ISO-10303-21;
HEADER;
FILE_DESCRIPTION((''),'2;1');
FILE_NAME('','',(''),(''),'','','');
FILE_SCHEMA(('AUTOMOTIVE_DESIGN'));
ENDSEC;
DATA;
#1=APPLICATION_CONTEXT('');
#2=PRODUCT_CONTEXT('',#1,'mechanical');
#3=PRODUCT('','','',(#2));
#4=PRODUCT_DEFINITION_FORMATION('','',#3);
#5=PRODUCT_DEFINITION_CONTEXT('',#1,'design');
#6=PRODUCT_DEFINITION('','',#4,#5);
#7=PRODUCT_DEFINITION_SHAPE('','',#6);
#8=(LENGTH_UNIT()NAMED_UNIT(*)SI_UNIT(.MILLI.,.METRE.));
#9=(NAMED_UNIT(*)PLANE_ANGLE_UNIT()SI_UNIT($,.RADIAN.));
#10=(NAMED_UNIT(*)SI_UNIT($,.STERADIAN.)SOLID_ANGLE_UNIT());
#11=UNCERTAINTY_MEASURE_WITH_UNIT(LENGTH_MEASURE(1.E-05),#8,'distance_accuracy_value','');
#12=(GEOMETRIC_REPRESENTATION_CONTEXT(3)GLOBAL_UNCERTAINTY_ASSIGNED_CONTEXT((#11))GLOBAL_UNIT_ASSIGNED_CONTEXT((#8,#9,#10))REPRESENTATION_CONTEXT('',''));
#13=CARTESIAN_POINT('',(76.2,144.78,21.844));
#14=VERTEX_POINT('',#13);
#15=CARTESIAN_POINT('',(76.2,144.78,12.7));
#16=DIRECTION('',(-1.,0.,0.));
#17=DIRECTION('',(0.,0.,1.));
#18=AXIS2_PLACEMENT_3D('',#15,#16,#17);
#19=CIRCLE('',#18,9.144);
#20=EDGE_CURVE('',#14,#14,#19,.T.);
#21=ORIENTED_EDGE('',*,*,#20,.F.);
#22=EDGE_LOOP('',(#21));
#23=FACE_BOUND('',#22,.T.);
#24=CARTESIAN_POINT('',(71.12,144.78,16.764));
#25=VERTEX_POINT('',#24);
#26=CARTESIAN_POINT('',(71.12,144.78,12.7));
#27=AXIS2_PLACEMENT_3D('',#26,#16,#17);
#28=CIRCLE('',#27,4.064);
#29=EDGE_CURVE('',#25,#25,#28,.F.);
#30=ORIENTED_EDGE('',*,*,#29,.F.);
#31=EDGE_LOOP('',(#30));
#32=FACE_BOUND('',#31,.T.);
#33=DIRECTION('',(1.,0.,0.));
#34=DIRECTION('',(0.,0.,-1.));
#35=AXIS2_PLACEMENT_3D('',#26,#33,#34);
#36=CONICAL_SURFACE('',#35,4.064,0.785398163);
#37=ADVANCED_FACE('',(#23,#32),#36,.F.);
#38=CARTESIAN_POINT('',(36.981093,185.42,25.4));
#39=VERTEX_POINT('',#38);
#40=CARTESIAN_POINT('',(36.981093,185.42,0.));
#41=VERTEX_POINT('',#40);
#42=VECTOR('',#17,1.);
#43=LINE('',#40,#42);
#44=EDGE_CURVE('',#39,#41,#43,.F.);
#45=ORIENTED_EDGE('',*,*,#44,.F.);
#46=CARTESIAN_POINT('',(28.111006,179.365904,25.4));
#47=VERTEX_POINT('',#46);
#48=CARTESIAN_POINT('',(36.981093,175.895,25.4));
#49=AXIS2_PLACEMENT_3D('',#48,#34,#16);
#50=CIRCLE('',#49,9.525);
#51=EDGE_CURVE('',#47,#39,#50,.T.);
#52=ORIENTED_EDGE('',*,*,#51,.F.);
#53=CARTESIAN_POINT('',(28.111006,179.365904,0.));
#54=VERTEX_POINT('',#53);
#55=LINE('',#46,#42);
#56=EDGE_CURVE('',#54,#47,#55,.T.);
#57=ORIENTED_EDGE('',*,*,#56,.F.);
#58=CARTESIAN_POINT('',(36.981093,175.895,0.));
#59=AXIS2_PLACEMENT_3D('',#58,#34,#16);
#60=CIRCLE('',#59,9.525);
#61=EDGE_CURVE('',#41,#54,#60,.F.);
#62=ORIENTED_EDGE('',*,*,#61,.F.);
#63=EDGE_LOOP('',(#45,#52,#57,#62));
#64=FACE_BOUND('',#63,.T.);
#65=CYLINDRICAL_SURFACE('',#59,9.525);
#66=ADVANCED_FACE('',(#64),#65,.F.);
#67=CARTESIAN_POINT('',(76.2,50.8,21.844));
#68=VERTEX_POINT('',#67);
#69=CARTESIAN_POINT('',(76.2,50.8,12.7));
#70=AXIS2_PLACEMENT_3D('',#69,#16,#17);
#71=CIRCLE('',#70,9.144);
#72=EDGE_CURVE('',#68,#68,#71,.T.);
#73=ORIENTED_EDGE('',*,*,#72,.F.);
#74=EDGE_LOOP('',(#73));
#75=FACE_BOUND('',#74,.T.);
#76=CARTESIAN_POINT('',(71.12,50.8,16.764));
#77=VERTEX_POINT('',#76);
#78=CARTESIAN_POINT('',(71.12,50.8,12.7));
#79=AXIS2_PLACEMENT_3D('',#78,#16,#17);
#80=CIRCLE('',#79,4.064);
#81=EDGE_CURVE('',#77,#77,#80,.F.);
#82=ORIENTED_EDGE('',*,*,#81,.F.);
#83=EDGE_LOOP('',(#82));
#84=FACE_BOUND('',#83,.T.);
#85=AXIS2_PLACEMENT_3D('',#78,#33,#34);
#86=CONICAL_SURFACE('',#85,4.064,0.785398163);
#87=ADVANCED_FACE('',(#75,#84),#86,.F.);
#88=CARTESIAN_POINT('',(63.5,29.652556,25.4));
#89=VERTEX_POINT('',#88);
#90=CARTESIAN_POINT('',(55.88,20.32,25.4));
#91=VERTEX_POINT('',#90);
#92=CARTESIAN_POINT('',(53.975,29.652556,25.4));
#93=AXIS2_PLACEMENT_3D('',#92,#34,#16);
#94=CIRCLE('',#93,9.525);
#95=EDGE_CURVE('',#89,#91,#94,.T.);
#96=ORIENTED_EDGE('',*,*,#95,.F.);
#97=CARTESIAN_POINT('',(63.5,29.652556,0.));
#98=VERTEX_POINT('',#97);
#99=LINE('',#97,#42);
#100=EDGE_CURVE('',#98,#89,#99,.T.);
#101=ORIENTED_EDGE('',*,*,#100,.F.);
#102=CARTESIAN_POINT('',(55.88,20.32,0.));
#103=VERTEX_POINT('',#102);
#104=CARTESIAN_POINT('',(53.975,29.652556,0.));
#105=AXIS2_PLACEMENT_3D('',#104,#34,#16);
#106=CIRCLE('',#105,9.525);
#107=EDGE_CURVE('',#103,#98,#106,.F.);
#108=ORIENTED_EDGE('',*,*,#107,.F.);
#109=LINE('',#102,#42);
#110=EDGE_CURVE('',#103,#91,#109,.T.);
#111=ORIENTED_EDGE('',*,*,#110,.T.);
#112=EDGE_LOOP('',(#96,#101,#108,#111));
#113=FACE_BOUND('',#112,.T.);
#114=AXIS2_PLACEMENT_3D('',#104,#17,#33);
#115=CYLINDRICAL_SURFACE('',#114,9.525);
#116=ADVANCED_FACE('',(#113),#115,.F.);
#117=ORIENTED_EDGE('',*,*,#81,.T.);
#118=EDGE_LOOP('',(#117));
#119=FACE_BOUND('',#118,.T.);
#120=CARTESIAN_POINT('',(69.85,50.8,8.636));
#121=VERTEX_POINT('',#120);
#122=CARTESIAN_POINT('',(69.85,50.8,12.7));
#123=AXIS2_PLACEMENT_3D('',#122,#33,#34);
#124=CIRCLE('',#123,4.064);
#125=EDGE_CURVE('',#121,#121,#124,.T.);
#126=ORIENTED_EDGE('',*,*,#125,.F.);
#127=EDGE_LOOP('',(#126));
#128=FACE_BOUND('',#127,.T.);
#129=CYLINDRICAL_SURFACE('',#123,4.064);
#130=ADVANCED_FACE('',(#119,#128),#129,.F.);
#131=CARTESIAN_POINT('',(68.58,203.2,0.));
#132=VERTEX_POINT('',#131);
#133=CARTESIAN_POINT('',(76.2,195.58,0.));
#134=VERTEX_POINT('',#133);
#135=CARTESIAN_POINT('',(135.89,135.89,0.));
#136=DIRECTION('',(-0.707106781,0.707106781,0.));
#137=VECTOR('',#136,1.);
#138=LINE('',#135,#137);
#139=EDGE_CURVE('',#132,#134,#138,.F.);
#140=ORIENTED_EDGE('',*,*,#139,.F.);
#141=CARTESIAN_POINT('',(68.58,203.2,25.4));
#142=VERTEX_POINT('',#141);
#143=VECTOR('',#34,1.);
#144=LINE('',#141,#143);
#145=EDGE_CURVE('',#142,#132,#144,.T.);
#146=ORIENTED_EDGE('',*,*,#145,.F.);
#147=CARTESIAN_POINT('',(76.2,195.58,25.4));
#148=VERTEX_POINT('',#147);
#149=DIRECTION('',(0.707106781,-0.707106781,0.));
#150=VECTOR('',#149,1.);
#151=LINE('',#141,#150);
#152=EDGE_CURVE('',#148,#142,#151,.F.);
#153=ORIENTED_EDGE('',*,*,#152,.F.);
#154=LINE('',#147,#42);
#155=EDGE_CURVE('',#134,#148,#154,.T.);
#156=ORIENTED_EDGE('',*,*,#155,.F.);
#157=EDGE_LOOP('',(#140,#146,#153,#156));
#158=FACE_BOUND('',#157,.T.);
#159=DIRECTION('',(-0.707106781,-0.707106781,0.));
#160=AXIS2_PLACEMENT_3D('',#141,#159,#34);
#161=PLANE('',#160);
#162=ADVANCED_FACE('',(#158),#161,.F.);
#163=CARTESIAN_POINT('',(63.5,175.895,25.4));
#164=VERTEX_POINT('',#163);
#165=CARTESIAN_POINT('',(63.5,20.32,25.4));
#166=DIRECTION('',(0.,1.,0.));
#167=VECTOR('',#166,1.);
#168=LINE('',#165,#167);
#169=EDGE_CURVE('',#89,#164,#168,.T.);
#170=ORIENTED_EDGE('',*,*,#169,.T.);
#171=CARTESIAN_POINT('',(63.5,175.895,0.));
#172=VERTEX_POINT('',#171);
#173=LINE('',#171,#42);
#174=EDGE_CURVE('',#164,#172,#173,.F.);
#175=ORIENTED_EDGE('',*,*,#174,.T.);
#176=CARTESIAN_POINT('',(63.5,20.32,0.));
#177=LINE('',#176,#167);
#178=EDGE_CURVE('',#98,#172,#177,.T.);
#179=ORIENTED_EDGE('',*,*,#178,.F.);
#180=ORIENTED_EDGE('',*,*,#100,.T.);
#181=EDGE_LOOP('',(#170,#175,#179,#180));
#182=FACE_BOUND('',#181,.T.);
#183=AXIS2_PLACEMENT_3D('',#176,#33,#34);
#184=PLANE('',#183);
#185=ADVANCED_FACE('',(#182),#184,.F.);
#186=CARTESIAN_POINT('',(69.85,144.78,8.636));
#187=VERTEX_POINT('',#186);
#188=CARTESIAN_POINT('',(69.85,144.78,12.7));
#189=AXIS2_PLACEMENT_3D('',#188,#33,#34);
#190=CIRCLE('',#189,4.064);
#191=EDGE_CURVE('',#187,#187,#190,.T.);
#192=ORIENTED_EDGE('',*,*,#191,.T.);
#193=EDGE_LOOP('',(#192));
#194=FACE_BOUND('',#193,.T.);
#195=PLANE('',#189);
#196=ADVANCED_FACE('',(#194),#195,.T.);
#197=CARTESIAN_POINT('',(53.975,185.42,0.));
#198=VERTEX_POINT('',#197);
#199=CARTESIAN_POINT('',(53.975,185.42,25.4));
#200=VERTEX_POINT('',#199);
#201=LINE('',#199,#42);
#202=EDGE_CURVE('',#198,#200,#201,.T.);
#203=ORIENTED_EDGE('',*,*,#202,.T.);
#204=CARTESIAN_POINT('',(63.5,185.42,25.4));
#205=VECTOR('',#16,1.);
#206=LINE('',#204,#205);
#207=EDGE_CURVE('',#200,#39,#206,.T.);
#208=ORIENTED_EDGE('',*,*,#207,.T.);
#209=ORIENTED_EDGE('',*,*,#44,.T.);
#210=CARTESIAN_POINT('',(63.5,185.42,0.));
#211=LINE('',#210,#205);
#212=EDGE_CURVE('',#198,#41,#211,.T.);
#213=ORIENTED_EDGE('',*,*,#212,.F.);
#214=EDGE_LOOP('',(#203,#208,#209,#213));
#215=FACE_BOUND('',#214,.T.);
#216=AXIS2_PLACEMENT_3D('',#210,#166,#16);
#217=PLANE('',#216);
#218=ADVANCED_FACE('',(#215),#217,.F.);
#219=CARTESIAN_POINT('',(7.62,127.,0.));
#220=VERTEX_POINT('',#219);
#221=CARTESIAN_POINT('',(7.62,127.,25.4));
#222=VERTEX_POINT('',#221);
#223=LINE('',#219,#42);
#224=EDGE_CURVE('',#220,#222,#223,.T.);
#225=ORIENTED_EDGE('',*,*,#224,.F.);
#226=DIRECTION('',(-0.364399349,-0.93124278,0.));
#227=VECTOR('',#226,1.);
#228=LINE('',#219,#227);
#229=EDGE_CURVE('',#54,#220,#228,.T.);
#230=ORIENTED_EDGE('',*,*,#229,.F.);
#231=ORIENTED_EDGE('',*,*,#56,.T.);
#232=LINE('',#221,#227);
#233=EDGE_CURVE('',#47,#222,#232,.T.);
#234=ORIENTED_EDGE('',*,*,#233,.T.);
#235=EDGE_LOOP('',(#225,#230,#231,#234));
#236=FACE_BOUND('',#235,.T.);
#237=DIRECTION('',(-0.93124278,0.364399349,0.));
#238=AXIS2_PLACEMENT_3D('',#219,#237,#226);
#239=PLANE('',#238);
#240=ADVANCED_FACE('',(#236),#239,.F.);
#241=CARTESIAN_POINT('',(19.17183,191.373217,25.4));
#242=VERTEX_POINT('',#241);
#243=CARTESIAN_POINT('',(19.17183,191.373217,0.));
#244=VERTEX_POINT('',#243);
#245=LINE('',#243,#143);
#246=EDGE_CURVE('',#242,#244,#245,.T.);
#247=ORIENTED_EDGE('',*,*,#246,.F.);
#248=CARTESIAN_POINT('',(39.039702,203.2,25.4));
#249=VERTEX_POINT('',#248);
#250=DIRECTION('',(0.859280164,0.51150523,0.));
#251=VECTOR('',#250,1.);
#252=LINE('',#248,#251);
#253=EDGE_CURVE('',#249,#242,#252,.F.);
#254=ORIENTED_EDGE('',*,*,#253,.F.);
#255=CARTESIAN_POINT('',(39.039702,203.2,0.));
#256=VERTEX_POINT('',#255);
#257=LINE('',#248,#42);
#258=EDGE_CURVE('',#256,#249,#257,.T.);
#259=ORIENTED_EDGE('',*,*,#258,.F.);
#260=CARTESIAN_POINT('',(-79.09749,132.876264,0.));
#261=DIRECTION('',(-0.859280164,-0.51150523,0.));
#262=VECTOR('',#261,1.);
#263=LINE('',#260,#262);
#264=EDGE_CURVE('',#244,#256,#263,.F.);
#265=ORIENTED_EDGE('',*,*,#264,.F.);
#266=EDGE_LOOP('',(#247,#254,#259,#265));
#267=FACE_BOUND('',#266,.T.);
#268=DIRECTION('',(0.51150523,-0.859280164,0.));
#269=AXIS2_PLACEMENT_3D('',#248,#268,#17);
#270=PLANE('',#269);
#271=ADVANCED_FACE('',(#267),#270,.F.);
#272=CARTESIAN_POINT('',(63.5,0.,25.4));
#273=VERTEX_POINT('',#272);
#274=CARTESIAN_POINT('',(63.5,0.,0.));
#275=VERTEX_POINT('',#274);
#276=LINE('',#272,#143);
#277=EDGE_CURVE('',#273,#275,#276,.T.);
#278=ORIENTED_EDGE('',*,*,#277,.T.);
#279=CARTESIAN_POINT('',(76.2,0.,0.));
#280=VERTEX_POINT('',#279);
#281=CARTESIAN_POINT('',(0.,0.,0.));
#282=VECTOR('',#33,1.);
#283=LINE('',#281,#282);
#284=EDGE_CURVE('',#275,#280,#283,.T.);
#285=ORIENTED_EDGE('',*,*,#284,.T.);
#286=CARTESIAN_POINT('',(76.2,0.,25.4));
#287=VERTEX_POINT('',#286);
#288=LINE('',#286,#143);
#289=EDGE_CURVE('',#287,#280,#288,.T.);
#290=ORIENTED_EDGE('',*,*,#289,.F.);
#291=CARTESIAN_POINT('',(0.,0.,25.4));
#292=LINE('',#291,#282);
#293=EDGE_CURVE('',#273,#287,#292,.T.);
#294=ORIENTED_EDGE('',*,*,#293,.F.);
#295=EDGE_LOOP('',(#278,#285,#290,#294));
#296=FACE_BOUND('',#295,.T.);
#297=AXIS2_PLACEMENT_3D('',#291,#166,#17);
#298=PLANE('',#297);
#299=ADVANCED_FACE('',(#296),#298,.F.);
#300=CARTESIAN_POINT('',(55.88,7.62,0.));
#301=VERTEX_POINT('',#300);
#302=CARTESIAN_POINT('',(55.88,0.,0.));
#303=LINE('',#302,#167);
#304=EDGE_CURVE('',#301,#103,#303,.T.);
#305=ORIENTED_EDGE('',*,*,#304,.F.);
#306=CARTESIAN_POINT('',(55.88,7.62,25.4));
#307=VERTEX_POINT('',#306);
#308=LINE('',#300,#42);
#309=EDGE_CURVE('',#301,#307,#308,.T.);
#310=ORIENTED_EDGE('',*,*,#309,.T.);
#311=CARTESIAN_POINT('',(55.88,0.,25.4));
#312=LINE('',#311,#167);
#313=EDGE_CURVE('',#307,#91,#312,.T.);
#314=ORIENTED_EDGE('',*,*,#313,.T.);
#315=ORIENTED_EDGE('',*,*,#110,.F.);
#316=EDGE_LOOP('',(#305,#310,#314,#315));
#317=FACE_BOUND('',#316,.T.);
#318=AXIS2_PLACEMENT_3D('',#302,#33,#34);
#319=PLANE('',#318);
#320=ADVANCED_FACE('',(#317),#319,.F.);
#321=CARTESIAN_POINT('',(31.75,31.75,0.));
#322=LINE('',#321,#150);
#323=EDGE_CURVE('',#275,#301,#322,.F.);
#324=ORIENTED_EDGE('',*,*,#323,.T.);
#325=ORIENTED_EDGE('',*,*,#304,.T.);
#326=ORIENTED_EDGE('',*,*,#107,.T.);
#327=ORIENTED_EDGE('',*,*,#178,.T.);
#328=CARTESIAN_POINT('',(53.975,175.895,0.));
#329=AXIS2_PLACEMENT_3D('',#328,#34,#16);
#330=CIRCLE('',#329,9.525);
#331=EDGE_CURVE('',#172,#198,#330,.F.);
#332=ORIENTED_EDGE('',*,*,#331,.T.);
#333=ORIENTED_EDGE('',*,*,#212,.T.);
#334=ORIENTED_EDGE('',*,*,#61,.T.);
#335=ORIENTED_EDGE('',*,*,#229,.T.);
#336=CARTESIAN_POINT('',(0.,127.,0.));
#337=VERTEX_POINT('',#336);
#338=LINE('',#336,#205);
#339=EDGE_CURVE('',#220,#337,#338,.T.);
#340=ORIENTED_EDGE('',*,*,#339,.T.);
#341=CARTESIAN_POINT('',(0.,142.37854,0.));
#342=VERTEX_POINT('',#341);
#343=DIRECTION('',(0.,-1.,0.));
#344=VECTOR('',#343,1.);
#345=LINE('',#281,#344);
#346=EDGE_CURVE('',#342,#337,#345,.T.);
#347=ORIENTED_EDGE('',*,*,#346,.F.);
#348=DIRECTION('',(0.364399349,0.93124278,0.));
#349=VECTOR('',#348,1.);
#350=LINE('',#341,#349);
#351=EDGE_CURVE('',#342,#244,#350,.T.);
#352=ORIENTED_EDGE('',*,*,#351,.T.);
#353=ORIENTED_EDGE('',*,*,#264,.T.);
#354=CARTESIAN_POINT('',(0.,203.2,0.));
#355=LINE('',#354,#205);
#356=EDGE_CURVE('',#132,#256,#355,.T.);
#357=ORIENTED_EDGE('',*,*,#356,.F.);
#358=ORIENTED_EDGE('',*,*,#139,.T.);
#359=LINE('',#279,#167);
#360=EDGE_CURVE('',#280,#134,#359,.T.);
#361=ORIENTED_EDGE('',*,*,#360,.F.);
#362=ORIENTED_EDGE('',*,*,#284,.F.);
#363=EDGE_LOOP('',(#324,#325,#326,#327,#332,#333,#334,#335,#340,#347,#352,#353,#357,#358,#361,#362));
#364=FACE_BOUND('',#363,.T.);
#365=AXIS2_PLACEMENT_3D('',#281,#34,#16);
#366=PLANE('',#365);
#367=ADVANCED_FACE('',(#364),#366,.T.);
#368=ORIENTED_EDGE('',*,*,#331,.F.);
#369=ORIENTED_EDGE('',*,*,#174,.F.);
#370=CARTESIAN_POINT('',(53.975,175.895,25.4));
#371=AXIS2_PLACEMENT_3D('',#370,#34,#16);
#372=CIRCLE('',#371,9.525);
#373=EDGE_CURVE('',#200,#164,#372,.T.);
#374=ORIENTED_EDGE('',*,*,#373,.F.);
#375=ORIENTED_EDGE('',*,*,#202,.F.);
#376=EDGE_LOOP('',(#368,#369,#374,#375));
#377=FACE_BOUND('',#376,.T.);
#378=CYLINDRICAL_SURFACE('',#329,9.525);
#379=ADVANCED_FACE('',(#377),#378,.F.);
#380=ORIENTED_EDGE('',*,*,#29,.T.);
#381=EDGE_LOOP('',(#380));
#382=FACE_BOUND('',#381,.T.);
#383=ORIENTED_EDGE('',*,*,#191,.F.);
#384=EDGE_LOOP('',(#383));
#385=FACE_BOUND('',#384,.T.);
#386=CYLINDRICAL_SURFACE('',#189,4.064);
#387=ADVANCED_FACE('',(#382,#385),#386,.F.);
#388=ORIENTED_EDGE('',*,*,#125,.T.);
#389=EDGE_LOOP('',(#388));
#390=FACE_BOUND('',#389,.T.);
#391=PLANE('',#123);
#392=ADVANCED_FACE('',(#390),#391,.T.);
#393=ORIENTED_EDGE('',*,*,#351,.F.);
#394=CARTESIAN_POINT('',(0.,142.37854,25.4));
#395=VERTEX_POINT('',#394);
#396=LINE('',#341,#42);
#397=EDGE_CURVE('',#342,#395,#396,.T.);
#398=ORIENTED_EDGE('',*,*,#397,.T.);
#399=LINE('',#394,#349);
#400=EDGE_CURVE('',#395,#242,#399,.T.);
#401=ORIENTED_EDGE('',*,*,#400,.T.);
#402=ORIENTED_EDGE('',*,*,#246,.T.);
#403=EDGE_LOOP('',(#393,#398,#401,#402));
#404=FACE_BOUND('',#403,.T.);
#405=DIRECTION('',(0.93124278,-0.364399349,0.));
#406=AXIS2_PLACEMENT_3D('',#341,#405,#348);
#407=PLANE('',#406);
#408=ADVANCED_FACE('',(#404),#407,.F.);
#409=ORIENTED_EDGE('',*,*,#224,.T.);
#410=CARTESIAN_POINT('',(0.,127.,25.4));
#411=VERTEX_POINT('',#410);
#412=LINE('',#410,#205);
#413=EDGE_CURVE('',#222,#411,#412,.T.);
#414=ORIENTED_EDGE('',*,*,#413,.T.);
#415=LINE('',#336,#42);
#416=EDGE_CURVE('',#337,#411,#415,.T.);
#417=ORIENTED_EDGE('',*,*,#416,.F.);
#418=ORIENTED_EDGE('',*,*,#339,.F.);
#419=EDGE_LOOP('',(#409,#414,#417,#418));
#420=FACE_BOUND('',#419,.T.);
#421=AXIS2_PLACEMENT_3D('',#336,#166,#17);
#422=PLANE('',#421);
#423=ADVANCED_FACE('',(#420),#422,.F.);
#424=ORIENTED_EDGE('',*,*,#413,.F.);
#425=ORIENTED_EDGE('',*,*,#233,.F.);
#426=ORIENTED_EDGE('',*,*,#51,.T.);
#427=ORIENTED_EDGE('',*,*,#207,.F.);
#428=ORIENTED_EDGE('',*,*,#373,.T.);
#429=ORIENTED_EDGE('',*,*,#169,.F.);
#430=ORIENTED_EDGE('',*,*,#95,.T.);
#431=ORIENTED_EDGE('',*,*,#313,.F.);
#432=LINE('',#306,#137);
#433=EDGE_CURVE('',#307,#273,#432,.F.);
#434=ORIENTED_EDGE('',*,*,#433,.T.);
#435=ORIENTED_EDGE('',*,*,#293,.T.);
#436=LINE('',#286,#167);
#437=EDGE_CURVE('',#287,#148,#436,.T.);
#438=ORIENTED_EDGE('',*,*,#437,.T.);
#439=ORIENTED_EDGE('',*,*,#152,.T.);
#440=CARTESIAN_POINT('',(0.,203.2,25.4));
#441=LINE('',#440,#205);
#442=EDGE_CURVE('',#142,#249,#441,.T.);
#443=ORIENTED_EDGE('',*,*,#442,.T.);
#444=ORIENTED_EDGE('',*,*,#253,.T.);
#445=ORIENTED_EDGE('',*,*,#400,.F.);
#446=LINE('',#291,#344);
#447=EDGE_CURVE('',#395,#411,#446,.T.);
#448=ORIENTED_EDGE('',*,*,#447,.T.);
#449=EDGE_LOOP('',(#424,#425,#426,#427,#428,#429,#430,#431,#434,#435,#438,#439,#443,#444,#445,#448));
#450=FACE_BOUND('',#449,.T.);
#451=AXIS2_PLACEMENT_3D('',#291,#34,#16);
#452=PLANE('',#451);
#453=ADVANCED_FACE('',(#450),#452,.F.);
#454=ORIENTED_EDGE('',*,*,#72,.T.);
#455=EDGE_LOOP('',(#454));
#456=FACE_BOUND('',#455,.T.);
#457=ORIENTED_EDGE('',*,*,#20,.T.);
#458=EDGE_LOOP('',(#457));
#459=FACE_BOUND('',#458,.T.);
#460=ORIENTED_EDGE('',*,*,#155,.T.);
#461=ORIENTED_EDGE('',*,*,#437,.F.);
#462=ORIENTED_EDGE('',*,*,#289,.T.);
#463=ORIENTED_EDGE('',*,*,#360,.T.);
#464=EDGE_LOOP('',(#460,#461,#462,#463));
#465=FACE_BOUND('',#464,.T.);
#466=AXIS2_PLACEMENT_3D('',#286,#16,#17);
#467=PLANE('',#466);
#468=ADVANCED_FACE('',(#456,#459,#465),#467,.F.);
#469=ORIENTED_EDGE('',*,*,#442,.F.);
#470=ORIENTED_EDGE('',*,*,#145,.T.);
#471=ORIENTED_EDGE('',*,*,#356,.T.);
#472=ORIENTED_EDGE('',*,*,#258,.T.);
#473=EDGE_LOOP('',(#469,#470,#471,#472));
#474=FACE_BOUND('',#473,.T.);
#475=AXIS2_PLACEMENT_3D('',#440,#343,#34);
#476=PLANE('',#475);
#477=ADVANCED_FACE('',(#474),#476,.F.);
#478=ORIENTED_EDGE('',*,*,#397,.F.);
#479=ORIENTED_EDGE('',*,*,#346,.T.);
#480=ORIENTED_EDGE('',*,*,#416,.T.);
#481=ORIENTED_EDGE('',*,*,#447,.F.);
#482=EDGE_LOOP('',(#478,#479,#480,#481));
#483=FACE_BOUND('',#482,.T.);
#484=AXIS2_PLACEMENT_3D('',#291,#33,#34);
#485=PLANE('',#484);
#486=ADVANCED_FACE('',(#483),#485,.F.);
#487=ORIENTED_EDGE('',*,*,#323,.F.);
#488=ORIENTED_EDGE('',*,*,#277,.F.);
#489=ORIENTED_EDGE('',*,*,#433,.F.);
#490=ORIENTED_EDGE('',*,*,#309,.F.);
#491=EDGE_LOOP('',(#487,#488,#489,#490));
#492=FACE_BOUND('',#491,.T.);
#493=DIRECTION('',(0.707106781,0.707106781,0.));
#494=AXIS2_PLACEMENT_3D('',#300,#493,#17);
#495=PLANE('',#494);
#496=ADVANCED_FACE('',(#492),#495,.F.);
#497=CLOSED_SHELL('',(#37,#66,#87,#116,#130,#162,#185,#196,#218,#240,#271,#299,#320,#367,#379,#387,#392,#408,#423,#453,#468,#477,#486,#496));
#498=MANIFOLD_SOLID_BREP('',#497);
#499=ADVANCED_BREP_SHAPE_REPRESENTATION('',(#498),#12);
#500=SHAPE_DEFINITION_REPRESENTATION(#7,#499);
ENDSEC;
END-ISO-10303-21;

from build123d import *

# Parameters (mm, degrees)
SKETCH1_W           = 76.2
SKETCH1_H           = 203.2
BOSS_EXTRUDE1_DEPTH = 25.4
CUT_EXTRUDE1_DEPTH  = 219.499061783
FILLET1_R           = 9.525
CHAMFER3_SIZE       = 7.62
CHAMFER5_SIZE       = 12.7
CHAMFER5_SIZE2      = 15.24
SKETCH5_R           = 4.064
CUT_EXTRUDE2_DEPTH  = 6.35
CHAMFER6_SIZE       = 5.08
FILLET2_R           = 9.525
CHAMFER7_SIZE       = 7.62


with BuildPart() as part:
    # Sketch1 → Boss-Extrude1 (new body)
    with BuildSketch(Plane.XY):
        with Locations((38.1, 101.6)):
            Rectangle(SKETCH1_W, SKETCH1_H)
    extrude(amount=BOSS_EXTRUDE1_DEPTH)

    # Sketch2 → Cut-Extrude1 (cut, through all)
    with BuildSketch(Plane.XY.offset(25.4)):
        Polygon((0, 0), (55.88, 0), (55.88, 20.32), (63.5, 20.32), (63.5, 185.42), (30.48, 185.42), (7.62, 127), (0, 127), align=None)
        Polygon((0, 142.378540166), (23.799701674, 203.2), (0, 203.2), align=None)
    extrude(amount=-CUT_EXTRUDE1_DEPTH, mode=Mode.SUBTRACT)

    # Fillet1
    fillet1_edges = [part.edges().sort_by_distance(p)[0] for p in [
        (30.48, 185.42, 12.7),
        (63.5, 185.42, 12.7),
    ]]
    fillet(fillet1_edges, radius=FILLET1_R)

    # Chamfer3
    chamfer3_edges = [part.edges().sort_by_distance(p)[0] for p in [
        (76.2, 203.2, 12.7),
    ]]
    chamfer(chamfer3_edges, length=CHAMFER3_SIZE)

    # Chamfer5
    chamfer5_edges = [part.edges().sort_by_distance(p)[0] for p in [
        (23.799701674, 203.2, 12.7),
    ]]
    chamfer5_side = [part.faces().sort_by_distance(p)[0] for p in [
        (11.899850837, 172.789270083, 12.7),
    ]]
    chamfer(chamfer5_edges, length=CHAMFER5_SIZE, length2=CHAMFER5_SIZE2, reference=chamfer5_side[0])

    # Sketch5 → Cut-Extrude2 (cut)
    with BuildSketch(Plane(origin=(76.2, 0, 0), x_dir=(0, 0, -1), z_dir=(1, 0, 0))):
        with Locations((-12.7, 144.78)):
            Circle(SKETCH5_R)
        with Locations((-12.7, 50.8)):
            Circle(SKETCH5_R)
    extrude(amount=-CUT_EXTRUDE2_DEPTH, mode=Mode.SUBTRACT)

    # Chamfer6
    chamfer6_edges = [part.edges().sort_by_distance(p)[0] for p in [
        (76.2, 144.78, 16.764),
        (76.2, 50.8, 16.764),
    ]]
    chamfer(chamfer6_edges, length=CHAMFER6_SIZE)

    # Fillet2
    # the kernel refuses this fillet: 9.525 mm, written as the material it adds along each edge
    with BuildSketch(Plane(origin=(63.5, 20.32, 25.4), x_dir=(-1, 0, 0), z_dir=(0, 0, -1))) as fillet2_piece_1:
        with BuildLine():
            CenterArc((9.525, 9.33255592), FILLET2_R, 180, 78.463040967)
            Line((0, 9.33255592), (-0.1905, 9.33255592))
            Line((-0.1905, 9.33255592), (-0.1905, 0))
            Line((-0.1905, 0), (0, -0.1905))
            ThreePointArc((0, -0.1905), (3.81, -0.1905), (7.5819, -0.186651118))
            Line((7.5819, -0.186651118), (7.62, 0))
        make_face()
    extrude(amount=25.4)

    # Chamfer7
    chamfer7_edges = [part.edges().sort_by_distance(p)[0] for p in [
        (55.88, 0, 12.7),
    ]]
    chamfer(chamfer7_edges, length=CHAMFER7_SIZE)


solid = part.part
